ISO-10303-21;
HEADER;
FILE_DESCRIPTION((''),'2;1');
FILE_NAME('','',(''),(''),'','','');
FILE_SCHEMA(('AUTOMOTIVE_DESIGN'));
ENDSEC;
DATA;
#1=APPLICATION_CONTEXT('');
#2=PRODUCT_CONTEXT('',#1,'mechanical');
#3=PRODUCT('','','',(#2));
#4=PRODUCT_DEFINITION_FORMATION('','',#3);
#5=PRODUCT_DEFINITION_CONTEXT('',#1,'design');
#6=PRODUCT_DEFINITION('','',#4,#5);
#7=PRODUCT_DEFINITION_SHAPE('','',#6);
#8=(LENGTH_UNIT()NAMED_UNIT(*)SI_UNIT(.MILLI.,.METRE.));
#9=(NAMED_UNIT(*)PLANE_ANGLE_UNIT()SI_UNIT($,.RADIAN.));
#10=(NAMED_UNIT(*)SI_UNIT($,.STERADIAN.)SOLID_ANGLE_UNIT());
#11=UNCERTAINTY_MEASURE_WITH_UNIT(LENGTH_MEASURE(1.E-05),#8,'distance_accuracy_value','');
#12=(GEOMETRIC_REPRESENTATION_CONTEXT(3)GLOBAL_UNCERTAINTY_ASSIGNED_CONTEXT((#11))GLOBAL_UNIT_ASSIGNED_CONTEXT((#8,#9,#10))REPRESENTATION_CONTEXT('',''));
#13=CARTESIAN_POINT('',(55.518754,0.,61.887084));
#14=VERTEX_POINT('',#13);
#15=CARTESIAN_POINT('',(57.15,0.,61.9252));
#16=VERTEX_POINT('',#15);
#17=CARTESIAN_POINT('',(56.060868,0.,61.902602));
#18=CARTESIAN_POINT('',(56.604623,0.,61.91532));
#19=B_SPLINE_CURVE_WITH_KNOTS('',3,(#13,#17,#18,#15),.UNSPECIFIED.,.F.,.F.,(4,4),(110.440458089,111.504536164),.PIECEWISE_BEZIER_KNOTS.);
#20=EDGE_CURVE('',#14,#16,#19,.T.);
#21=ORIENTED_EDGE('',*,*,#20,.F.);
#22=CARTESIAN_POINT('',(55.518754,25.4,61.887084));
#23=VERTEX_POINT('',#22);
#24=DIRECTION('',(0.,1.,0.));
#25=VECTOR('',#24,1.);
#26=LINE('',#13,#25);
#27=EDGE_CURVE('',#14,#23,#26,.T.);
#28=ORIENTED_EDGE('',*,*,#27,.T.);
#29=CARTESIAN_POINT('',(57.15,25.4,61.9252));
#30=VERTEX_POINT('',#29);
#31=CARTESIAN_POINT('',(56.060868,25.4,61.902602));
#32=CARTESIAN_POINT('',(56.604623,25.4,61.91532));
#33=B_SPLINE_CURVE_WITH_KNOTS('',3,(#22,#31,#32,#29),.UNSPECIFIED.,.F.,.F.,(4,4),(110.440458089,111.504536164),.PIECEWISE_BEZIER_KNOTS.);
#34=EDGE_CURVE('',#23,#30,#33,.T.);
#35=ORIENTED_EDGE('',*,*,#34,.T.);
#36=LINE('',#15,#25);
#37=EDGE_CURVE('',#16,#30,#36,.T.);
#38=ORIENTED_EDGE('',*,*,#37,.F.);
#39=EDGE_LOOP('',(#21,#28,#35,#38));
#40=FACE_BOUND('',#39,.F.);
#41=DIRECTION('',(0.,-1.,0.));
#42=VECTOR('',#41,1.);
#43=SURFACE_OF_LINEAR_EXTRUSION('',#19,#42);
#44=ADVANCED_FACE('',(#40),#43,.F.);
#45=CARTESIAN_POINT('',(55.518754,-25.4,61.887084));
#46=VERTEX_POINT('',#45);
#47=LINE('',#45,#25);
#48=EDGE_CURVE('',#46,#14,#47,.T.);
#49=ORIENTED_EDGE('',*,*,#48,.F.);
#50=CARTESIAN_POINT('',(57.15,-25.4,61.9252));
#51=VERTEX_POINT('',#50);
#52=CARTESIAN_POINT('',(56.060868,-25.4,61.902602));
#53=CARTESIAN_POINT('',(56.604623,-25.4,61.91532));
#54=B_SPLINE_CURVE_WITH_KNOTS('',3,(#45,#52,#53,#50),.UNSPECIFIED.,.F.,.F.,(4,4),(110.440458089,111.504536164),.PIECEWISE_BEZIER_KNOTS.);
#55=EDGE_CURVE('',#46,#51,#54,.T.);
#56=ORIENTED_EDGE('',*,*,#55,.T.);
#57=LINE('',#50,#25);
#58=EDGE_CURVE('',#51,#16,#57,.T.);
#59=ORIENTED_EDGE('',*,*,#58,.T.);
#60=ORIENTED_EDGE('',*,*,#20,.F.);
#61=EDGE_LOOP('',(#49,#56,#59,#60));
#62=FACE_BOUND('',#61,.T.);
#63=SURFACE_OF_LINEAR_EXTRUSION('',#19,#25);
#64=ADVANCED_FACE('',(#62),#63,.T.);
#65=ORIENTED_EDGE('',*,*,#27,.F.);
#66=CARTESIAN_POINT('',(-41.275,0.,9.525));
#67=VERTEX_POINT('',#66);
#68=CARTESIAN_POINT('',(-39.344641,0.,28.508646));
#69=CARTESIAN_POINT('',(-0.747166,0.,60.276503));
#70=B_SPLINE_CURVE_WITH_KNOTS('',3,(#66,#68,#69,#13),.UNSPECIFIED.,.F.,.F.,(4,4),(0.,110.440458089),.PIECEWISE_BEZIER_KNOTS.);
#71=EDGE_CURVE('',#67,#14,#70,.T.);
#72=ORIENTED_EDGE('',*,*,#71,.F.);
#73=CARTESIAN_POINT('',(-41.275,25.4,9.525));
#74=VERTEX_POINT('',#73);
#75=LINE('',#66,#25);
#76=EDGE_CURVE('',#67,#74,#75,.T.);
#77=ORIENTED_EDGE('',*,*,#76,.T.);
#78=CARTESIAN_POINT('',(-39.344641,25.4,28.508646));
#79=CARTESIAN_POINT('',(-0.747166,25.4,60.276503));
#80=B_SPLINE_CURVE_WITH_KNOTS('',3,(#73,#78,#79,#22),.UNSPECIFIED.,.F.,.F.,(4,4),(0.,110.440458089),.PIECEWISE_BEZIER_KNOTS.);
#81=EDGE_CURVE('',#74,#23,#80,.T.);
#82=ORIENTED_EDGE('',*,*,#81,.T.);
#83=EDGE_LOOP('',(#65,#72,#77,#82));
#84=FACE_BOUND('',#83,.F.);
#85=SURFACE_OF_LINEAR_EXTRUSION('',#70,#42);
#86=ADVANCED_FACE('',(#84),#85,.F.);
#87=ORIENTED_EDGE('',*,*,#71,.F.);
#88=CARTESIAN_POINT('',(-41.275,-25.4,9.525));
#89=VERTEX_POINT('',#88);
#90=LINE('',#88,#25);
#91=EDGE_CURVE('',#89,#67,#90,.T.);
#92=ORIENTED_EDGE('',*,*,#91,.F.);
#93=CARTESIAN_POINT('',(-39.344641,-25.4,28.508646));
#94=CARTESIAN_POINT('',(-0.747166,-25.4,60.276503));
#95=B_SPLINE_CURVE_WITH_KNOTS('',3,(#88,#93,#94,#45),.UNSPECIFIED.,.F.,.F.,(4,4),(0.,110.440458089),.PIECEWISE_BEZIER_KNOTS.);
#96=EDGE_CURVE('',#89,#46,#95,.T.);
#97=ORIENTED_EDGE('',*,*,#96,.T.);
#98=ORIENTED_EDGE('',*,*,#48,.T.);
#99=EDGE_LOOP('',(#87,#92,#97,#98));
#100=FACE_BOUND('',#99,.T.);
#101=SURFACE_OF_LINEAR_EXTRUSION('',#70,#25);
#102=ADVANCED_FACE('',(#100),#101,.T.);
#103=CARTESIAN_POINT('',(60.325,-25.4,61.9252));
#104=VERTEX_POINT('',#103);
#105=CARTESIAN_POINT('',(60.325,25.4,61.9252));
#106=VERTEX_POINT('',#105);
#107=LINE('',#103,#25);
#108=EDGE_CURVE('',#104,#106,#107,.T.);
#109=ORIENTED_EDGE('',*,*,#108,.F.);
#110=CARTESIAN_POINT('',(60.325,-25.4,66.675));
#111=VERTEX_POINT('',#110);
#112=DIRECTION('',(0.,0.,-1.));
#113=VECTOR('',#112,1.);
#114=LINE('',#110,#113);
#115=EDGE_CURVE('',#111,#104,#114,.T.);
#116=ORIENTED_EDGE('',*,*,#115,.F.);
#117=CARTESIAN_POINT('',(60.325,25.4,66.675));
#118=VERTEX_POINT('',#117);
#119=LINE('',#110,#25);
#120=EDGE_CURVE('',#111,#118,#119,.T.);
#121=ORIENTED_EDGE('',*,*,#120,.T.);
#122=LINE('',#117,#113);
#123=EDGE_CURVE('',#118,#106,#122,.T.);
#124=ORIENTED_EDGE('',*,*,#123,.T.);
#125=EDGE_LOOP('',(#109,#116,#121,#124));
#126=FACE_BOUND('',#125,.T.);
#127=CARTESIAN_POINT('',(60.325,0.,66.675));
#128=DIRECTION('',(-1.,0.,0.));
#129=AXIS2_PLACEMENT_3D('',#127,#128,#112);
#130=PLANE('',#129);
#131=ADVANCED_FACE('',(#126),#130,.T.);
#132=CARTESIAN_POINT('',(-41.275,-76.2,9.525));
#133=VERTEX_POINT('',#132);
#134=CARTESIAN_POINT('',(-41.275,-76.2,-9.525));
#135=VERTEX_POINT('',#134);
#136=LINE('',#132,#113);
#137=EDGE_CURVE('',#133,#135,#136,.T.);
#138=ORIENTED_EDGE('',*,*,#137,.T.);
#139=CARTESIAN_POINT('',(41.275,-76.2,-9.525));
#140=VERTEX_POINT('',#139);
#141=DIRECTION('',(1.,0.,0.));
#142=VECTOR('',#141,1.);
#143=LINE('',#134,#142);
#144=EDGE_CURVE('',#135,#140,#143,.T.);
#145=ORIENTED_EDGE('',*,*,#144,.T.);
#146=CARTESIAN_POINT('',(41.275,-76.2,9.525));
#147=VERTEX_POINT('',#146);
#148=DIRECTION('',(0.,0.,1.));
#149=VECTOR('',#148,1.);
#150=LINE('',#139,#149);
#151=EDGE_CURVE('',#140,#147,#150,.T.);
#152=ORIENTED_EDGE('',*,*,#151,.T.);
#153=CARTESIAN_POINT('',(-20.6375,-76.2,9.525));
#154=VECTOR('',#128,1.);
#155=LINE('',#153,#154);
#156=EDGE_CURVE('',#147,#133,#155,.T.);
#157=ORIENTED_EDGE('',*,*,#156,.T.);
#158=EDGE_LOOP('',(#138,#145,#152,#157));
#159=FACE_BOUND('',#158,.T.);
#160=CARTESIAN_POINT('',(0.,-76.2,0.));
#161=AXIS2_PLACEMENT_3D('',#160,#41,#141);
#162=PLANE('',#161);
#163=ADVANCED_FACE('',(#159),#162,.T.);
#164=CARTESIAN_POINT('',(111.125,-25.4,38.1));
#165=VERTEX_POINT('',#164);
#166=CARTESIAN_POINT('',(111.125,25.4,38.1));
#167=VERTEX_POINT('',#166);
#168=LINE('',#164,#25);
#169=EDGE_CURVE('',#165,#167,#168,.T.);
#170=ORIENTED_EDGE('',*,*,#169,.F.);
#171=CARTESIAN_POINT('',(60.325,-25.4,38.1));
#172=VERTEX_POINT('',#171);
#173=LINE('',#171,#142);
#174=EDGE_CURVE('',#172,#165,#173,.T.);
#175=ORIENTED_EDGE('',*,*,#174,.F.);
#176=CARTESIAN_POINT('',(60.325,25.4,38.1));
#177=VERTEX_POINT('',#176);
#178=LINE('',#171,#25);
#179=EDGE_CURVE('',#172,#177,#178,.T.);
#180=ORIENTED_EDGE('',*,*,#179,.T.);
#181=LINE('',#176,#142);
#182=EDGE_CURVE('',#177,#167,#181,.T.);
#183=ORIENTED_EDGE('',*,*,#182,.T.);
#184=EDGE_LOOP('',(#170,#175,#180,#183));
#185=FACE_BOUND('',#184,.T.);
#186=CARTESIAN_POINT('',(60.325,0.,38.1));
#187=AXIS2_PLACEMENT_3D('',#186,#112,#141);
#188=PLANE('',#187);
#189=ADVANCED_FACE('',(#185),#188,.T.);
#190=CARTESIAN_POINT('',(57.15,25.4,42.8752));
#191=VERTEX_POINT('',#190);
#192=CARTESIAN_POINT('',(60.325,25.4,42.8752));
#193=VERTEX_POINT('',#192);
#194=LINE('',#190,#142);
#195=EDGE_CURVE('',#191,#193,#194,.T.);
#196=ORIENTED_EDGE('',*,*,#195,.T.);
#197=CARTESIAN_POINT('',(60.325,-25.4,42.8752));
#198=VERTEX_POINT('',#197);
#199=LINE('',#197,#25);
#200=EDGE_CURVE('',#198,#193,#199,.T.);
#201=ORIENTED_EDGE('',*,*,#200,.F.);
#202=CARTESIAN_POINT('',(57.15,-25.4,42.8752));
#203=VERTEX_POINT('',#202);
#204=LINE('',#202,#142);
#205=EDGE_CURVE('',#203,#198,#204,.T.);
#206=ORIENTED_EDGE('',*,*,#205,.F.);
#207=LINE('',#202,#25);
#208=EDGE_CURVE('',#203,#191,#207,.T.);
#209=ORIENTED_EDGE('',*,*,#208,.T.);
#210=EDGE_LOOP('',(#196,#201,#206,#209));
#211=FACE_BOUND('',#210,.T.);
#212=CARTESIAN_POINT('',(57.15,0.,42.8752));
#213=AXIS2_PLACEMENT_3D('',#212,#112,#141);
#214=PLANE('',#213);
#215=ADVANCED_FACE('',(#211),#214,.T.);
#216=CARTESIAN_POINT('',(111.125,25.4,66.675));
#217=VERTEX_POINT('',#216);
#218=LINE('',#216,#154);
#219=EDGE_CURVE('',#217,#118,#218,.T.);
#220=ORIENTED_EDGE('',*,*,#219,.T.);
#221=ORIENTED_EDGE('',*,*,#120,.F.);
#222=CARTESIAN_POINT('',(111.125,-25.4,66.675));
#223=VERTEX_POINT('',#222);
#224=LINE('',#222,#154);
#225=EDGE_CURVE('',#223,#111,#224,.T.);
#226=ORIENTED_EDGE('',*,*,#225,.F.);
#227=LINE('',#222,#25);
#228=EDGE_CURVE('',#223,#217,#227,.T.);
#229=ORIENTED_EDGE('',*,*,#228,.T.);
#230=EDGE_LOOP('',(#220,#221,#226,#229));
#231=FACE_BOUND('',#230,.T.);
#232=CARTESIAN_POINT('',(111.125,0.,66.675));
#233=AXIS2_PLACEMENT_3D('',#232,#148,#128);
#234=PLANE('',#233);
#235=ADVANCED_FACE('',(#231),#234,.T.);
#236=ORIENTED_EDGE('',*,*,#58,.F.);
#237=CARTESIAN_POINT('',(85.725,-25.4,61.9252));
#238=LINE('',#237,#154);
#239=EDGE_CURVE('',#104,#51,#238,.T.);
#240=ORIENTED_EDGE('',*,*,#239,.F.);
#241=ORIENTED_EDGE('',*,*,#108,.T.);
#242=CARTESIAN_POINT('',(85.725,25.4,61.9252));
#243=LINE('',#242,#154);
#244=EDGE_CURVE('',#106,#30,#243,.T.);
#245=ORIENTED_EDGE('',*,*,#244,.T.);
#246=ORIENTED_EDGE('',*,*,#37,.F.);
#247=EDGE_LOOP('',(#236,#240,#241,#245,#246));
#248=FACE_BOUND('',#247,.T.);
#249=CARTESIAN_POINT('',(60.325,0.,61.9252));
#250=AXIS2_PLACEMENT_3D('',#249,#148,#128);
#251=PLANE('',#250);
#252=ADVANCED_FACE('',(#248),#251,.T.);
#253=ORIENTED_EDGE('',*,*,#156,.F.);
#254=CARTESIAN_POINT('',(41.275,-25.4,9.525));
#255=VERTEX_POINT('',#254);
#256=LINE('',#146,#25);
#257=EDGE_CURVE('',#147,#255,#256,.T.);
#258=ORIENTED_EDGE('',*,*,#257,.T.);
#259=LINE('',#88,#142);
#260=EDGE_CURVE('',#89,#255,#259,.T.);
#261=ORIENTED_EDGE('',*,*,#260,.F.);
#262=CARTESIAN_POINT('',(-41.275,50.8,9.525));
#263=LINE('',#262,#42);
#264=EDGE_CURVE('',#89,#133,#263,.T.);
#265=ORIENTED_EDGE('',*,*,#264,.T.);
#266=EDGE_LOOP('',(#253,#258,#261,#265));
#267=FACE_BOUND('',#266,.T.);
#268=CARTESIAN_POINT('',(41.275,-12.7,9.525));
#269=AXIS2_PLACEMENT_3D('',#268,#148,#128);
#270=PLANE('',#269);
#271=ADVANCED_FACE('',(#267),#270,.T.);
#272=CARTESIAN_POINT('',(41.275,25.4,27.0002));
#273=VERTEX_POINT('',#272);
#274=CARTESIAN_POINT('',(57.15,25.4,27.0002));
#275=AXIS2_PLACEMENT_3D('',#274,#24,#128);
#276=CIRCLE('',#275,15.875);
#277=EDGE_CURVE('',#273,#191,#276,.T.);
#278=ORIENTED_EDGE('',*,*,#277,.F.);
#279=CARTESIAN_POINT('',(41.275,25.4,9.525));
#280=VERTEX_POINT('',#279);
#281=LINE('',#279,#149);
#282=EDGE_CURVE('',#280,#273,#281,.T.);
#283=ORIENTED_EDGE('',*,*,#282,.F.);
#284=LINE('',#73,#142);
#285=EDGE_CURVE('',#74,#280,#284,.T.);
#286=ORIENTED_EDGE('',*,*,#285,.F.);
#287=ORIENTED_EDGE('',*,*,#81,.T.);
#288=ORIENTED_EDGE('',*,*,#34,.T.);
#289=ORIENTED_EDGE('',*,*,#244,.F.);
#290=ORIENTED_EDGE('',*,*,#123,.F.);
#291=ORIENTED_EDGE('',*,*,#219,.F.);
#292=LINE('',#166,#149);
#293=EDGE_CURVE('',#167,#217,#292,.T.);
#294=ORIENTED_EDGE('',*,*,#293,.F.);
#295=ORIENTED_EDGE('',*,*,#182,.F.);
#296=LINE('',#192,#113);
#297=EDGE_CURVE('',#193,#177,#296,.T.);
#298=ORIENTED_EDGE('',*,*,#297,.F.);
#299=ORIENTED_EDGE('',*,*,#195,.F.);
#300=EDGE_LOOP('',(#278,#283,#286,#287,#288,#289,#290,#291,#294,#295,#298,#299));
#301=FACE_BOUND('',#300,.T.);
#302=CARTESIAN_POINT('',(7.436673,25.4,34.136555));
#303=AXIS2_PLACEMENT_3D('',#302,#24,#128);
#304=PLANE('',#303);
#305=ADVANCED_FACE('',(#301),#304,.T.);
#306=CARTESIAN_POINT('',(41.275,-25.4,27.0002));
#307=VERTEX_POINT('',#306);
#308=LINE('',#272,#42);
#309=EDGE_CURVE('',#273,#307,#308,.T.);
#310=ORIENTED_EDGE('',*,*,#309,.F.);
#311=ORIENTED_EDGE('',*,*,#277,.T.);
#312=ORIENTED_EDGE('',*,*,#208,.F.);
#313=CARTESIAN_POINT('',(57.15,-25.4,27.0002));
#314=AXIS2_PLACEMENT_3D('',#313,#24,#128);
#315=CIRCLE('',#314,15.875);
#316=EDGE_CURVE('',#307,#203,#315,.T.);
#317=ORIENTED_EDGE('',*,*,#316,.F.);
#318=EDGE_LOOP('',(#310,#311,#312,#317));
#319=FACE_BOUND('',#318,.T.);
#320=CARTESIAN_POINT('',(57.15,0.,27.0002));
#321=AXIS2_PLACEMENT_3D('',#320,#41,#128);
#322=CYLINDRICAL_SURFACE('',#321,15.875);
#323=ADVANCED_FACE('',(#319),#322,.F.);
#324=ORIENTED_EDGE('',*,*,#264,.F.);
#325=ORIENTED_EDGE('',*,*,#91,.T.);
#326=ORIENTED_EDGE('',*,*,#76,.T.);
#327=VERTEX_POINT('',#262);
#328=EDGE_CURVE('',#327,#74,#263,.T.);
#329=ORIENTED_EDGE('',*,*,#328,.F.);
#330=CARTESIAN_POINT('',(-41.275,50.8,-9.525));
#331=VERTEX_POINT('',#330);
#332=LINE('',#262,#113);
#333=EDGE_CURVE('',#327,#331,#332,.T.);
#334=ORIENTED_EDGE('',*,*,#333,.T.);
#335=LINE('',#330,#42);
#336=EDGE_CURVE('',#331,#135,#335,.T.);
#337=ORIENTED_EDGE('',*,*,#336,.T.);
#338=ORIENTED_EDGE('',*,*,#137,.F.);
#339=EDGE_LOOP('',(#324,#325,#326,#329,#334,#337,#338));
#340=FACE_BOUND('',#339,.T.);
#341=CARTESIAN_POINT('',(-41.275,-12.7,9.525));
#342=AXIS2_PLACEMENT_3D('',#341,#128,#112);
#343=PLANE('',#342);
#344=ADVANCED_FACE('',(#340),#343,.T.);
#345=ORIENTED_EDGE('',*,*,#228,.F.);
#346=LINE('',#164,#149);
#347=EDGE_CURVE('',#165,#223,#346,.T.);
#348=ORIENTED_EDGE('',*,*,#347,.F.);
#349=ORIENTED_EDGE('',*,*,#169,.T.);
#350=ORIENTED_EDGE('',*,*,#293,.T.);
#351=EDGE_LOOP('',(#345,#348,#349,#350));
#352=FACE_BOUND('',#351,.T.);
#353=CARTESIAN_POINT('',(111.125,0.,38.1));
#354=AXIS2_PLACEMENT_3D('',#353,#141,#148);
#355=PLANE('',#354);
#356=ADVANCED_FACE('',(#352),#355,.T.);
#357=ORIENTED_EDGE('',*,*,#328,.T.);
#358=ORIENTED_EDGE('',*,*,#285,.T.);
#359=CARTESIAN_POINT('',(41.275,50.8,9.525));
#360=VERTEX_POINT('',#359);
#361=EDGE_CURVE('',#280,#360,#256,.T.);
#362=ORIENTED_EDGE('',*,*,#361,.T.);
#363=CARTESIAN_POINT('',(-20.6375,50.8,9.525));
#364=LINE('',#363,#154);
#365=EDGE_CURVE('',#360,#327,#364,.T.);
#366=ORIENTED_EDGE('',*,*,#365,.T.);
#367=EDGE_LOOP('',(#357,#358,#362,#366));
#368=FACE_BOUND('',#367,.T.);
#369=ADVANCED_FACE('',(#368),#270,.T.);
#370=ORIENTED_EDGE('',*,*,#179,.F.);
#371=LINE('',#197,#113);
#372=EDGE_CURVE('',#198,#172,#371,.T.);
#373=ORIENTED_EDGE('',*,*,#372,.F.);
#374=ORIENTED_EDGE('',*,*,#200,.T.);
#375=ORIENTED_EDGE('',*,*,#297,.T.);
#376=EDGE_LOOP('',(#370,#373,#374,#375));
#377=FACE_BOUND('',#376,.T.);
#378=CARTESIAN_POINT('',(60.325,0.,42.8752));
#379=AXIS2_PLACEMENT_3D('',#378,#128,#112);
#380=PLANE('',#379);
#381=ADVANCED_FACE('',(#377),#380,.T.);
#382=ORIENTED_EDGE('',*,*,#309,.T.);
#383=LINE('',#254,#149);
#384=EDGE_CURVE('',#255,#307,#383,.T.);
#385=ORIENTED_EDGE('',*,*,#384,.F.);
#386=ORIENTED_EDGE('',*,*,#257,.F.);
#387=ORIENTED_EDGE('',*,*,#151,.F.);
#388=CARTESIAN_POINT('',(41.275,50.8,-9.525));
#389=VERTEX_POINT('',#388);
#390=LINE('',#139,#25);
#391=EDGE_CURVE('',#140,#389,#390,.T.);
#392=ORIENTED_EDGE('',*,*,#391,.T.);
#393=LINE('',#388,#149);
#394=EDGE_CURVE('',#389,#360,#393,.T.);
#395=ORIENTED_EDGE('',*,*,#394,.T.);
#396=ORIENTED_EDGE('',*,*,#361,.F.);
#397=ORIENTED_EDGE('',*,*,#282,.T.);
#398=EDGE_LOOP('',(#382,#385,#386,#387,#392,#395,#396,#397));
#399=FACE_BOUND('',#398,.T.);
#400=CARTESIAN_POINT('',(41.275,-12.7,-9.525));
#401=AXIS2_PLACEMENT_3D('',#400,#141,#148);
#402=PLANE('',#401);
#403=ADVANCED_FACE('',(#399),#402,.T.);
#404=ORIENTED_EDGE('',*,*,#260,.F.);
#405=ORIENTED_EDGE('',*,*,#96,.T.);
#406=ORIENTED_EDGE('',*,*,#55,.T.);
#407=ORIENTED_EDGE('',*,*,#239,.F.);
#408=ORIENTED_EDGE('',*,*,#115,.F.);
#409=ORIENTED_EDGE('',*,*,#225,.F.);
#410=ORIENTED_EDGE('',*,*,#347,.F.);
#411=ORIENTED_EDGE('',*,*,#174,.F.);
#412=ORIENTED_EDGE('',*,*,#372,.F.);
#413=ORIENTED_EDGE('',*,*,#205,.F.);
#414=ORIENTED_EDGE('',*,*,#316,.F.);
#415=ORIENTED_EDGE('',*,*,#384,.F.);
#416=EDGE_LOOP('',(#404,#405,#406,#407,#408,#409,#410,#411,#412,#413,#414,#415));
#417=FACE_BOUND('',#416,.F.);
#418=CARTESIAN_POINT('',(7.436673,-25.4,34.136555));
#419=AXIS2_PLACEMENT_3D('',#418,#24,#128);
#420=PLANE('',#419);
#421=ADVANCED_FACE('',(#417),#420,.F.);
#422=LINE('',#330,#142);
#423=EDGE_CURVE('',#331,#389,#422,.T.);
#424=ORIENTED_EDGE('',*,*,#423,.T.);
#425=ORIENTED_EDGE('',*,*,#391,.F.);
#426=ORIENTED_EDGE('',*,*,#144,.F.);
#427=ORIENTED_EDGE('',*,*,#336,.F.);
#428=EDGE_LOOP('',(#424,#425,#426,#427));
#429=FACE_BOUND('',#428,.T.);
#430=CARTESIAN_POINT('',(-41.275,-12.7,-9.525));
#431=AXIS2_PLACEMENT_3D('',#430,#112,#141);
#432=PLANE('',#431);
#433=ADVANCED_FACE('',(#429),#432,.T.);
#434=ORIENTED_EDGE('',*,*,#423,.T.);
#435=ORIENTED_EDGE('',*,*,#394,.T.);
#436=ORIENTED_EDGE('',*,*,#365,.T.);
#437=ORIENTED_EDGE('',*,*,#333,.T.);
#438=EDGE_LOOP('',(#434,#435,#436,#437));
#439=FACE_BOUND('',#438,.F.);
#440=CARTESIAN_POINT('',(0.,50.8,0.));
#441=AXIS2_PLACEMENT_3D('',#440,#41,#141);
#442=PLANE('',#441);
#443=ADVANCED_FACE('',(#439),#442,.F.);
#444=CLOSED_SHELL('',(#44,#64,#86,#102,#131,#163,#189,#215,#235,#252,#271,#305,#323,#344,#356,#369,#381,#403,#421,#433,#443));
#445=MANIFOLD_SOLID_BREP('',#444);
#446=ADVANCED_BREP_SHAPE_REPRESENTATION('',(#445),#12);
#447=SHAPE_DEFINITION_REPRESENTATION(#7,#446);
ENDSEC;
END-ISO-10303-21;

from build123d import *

# Parameters (mm, degrees)
F0_W     = 25.4
F0_H     = 19.05
F1_DEPTH = 25.4
F2_DEPTH = 12.7
F3_DEPTH = 63.5


# Not quite as in the source:
# - a feature of the source that left no trace in its solid (it failed there, or was rolled back) is left out


with BuildPart() as f1:
    # F0 (on Front) → F1 (new body, symmetric)
    with BuildSketch(Plane.XZ):
        with BuildLine():
            add(Edge.make_bspline(
                [(-41.275, 9.525), (-39.3446406739, 28.5086459931), (-0.7471661584, 60.2765032574), (55.5187541124, 61.8870838083)],
                knots=[0, 0, 0, 0, 110.4404580892, 110.4404580892, 110.4404580892, 110.4404580892], degree=3))
            Line((-41.275, 9.525), (22.225, 9.525))
            Line((22.225, 9.525), (22.225, 27.0002))
            ThreePointArc((22.225, 27.0002), (31.8841447045, 51.1122754227), (55.5187541124, 61.8870838083))
        make_face()
        with BuildLine():
            Line((22.225, 9.525), (41.275, 9.525))
            Line((41.275, 9.525), (41.275, 27.0002))
            ThreePointArc((41.275, 27.0002), (45.9246798487, 38.2255201513), (57.15, 42.8752))
            Line((57.15, 42.8752), (60.325, 42.8752))
            Line((60.325, 42.8752), (60.325, 61.9252))
            Line((60.325, 61.9252), (57.15, 61.9252))
            add(Edge.make_bspline(
                [(55.5187541124, 61.8870838083), (56.0608682355, 61.9026015224), (56.6046225289, 61.915319722), (57.15, 61.9252)],
                knots=[110.4404580892, 110.4404580892, 110.4404580892, 110.4404580892, 111.5045361635, 111.5045361635, 111.5045361635, 111.5045361635], degree=3))
            ThreePointArc((55.5187541124, 61.8870838083), (31.8841447045, 51.1122754227), (22.225, 27.0002))
            Line((22.225, 27.0002), (22.225, 9.525))
        make_face()
        with Locations((73.025, 52.4002)):
            Rectangle(F0_W, F0_H)
        Polygon((60.325, 66.675), (60.325, 61.9252), (85.725, 61.9252), (85.725, 42.8752), (60.325, 42.8752), (60.325, 38.1), (111.125, 38.1), (111.125, 66.675), align=None)
    extrude(amount=F1_DEPTH, both=True)

    # F0 (on Front) → F2 (join, symmetric)
    with BuildSketch(Plane.XZ):
        Polygon((-41.275, 9.525), (-41.275, -9.525), (41.275, -9.525), (41.275, 9.525), (22.225, 9.525), align=None)
        with BuildLine():
            add(Edge.make_bspline(
                [(-41.275, 9.525), (-39.3446406739, 28.5086459931), (-0.7471661584, 60.2765032574), (55.5187541124, 61.8870838083)],
                knots=[0, 0, 0, 0, 110.4404580892, 110.4404580892, 110.4404580892, 110.4404580892], degree=3))
            Line((-41.275, 9.525), (22.225, 9.525))
            Line((22.225, 9.525), (22.225, 27.0002))
            ThreePointArc((22.225, 27.0002), (31.8841447045, 51.1122754227), (55.5187541124, 61.8870838083))
        make_face()
        with BuildLine():
            Line((22.225, 9.525), (41.275, 9.525))
            Line((41.275, 9.525), (41.275, 27.0002))
            ThreePointArc((41.275, 27.0002), (45.9246798487, 38.2255201513), (57.15, 42.8752))
            Line((57.15, 42.8752), (60.325, 42.8752))
            Line((60.325, 42.8752), (60.325, 61.9252))
            Line((60.325, 61.9252), (57.15, 61.9252))
            add(Edge.make_bspline(
                [(55.5187541124, 61.8870838083), (56.0608682355, 61.9026015224), (56.6046225289, 61.915319722), (57.15, 61.9252)],
                knots=[110.4404580892, 110.4404580892, 110.4404580892, 110.4404580892, 111.5045361635, 111.5045361635, 111.5045361635, 111.5045361635], degree=3))
            ThreePointArc((55.5187541124, 61.8870838083), (31.8841447045, 51.1122754227), (22.225, 27.0002))
            Line((22.225, 27.0002), (22.225, 9.525))
        make_face()
        with Locations((73.025, 52.4002)):
            Rectangle(F0_W, F0_H)
        Polygon((60.325, 66.675), (60.325, 61.9252), (85.725, 61.9252), (85.725, 42.8752), (60.325, 42.8752), (60.325, 38.1), (111.125, 38.1), (111.125, 66.675), align=None)
    extrude(amount=F2_DEPTH, both=True)

    # F3 (add, symmetric): a face of the model
    f3_faces = [f1.faces().sort_by_distance(p)[0] for p in [
        (0, -12.7, 0),
    ]]
    extrude(f3_faces, amount=F3_DEPTH, both=True)


solid = f1.part
